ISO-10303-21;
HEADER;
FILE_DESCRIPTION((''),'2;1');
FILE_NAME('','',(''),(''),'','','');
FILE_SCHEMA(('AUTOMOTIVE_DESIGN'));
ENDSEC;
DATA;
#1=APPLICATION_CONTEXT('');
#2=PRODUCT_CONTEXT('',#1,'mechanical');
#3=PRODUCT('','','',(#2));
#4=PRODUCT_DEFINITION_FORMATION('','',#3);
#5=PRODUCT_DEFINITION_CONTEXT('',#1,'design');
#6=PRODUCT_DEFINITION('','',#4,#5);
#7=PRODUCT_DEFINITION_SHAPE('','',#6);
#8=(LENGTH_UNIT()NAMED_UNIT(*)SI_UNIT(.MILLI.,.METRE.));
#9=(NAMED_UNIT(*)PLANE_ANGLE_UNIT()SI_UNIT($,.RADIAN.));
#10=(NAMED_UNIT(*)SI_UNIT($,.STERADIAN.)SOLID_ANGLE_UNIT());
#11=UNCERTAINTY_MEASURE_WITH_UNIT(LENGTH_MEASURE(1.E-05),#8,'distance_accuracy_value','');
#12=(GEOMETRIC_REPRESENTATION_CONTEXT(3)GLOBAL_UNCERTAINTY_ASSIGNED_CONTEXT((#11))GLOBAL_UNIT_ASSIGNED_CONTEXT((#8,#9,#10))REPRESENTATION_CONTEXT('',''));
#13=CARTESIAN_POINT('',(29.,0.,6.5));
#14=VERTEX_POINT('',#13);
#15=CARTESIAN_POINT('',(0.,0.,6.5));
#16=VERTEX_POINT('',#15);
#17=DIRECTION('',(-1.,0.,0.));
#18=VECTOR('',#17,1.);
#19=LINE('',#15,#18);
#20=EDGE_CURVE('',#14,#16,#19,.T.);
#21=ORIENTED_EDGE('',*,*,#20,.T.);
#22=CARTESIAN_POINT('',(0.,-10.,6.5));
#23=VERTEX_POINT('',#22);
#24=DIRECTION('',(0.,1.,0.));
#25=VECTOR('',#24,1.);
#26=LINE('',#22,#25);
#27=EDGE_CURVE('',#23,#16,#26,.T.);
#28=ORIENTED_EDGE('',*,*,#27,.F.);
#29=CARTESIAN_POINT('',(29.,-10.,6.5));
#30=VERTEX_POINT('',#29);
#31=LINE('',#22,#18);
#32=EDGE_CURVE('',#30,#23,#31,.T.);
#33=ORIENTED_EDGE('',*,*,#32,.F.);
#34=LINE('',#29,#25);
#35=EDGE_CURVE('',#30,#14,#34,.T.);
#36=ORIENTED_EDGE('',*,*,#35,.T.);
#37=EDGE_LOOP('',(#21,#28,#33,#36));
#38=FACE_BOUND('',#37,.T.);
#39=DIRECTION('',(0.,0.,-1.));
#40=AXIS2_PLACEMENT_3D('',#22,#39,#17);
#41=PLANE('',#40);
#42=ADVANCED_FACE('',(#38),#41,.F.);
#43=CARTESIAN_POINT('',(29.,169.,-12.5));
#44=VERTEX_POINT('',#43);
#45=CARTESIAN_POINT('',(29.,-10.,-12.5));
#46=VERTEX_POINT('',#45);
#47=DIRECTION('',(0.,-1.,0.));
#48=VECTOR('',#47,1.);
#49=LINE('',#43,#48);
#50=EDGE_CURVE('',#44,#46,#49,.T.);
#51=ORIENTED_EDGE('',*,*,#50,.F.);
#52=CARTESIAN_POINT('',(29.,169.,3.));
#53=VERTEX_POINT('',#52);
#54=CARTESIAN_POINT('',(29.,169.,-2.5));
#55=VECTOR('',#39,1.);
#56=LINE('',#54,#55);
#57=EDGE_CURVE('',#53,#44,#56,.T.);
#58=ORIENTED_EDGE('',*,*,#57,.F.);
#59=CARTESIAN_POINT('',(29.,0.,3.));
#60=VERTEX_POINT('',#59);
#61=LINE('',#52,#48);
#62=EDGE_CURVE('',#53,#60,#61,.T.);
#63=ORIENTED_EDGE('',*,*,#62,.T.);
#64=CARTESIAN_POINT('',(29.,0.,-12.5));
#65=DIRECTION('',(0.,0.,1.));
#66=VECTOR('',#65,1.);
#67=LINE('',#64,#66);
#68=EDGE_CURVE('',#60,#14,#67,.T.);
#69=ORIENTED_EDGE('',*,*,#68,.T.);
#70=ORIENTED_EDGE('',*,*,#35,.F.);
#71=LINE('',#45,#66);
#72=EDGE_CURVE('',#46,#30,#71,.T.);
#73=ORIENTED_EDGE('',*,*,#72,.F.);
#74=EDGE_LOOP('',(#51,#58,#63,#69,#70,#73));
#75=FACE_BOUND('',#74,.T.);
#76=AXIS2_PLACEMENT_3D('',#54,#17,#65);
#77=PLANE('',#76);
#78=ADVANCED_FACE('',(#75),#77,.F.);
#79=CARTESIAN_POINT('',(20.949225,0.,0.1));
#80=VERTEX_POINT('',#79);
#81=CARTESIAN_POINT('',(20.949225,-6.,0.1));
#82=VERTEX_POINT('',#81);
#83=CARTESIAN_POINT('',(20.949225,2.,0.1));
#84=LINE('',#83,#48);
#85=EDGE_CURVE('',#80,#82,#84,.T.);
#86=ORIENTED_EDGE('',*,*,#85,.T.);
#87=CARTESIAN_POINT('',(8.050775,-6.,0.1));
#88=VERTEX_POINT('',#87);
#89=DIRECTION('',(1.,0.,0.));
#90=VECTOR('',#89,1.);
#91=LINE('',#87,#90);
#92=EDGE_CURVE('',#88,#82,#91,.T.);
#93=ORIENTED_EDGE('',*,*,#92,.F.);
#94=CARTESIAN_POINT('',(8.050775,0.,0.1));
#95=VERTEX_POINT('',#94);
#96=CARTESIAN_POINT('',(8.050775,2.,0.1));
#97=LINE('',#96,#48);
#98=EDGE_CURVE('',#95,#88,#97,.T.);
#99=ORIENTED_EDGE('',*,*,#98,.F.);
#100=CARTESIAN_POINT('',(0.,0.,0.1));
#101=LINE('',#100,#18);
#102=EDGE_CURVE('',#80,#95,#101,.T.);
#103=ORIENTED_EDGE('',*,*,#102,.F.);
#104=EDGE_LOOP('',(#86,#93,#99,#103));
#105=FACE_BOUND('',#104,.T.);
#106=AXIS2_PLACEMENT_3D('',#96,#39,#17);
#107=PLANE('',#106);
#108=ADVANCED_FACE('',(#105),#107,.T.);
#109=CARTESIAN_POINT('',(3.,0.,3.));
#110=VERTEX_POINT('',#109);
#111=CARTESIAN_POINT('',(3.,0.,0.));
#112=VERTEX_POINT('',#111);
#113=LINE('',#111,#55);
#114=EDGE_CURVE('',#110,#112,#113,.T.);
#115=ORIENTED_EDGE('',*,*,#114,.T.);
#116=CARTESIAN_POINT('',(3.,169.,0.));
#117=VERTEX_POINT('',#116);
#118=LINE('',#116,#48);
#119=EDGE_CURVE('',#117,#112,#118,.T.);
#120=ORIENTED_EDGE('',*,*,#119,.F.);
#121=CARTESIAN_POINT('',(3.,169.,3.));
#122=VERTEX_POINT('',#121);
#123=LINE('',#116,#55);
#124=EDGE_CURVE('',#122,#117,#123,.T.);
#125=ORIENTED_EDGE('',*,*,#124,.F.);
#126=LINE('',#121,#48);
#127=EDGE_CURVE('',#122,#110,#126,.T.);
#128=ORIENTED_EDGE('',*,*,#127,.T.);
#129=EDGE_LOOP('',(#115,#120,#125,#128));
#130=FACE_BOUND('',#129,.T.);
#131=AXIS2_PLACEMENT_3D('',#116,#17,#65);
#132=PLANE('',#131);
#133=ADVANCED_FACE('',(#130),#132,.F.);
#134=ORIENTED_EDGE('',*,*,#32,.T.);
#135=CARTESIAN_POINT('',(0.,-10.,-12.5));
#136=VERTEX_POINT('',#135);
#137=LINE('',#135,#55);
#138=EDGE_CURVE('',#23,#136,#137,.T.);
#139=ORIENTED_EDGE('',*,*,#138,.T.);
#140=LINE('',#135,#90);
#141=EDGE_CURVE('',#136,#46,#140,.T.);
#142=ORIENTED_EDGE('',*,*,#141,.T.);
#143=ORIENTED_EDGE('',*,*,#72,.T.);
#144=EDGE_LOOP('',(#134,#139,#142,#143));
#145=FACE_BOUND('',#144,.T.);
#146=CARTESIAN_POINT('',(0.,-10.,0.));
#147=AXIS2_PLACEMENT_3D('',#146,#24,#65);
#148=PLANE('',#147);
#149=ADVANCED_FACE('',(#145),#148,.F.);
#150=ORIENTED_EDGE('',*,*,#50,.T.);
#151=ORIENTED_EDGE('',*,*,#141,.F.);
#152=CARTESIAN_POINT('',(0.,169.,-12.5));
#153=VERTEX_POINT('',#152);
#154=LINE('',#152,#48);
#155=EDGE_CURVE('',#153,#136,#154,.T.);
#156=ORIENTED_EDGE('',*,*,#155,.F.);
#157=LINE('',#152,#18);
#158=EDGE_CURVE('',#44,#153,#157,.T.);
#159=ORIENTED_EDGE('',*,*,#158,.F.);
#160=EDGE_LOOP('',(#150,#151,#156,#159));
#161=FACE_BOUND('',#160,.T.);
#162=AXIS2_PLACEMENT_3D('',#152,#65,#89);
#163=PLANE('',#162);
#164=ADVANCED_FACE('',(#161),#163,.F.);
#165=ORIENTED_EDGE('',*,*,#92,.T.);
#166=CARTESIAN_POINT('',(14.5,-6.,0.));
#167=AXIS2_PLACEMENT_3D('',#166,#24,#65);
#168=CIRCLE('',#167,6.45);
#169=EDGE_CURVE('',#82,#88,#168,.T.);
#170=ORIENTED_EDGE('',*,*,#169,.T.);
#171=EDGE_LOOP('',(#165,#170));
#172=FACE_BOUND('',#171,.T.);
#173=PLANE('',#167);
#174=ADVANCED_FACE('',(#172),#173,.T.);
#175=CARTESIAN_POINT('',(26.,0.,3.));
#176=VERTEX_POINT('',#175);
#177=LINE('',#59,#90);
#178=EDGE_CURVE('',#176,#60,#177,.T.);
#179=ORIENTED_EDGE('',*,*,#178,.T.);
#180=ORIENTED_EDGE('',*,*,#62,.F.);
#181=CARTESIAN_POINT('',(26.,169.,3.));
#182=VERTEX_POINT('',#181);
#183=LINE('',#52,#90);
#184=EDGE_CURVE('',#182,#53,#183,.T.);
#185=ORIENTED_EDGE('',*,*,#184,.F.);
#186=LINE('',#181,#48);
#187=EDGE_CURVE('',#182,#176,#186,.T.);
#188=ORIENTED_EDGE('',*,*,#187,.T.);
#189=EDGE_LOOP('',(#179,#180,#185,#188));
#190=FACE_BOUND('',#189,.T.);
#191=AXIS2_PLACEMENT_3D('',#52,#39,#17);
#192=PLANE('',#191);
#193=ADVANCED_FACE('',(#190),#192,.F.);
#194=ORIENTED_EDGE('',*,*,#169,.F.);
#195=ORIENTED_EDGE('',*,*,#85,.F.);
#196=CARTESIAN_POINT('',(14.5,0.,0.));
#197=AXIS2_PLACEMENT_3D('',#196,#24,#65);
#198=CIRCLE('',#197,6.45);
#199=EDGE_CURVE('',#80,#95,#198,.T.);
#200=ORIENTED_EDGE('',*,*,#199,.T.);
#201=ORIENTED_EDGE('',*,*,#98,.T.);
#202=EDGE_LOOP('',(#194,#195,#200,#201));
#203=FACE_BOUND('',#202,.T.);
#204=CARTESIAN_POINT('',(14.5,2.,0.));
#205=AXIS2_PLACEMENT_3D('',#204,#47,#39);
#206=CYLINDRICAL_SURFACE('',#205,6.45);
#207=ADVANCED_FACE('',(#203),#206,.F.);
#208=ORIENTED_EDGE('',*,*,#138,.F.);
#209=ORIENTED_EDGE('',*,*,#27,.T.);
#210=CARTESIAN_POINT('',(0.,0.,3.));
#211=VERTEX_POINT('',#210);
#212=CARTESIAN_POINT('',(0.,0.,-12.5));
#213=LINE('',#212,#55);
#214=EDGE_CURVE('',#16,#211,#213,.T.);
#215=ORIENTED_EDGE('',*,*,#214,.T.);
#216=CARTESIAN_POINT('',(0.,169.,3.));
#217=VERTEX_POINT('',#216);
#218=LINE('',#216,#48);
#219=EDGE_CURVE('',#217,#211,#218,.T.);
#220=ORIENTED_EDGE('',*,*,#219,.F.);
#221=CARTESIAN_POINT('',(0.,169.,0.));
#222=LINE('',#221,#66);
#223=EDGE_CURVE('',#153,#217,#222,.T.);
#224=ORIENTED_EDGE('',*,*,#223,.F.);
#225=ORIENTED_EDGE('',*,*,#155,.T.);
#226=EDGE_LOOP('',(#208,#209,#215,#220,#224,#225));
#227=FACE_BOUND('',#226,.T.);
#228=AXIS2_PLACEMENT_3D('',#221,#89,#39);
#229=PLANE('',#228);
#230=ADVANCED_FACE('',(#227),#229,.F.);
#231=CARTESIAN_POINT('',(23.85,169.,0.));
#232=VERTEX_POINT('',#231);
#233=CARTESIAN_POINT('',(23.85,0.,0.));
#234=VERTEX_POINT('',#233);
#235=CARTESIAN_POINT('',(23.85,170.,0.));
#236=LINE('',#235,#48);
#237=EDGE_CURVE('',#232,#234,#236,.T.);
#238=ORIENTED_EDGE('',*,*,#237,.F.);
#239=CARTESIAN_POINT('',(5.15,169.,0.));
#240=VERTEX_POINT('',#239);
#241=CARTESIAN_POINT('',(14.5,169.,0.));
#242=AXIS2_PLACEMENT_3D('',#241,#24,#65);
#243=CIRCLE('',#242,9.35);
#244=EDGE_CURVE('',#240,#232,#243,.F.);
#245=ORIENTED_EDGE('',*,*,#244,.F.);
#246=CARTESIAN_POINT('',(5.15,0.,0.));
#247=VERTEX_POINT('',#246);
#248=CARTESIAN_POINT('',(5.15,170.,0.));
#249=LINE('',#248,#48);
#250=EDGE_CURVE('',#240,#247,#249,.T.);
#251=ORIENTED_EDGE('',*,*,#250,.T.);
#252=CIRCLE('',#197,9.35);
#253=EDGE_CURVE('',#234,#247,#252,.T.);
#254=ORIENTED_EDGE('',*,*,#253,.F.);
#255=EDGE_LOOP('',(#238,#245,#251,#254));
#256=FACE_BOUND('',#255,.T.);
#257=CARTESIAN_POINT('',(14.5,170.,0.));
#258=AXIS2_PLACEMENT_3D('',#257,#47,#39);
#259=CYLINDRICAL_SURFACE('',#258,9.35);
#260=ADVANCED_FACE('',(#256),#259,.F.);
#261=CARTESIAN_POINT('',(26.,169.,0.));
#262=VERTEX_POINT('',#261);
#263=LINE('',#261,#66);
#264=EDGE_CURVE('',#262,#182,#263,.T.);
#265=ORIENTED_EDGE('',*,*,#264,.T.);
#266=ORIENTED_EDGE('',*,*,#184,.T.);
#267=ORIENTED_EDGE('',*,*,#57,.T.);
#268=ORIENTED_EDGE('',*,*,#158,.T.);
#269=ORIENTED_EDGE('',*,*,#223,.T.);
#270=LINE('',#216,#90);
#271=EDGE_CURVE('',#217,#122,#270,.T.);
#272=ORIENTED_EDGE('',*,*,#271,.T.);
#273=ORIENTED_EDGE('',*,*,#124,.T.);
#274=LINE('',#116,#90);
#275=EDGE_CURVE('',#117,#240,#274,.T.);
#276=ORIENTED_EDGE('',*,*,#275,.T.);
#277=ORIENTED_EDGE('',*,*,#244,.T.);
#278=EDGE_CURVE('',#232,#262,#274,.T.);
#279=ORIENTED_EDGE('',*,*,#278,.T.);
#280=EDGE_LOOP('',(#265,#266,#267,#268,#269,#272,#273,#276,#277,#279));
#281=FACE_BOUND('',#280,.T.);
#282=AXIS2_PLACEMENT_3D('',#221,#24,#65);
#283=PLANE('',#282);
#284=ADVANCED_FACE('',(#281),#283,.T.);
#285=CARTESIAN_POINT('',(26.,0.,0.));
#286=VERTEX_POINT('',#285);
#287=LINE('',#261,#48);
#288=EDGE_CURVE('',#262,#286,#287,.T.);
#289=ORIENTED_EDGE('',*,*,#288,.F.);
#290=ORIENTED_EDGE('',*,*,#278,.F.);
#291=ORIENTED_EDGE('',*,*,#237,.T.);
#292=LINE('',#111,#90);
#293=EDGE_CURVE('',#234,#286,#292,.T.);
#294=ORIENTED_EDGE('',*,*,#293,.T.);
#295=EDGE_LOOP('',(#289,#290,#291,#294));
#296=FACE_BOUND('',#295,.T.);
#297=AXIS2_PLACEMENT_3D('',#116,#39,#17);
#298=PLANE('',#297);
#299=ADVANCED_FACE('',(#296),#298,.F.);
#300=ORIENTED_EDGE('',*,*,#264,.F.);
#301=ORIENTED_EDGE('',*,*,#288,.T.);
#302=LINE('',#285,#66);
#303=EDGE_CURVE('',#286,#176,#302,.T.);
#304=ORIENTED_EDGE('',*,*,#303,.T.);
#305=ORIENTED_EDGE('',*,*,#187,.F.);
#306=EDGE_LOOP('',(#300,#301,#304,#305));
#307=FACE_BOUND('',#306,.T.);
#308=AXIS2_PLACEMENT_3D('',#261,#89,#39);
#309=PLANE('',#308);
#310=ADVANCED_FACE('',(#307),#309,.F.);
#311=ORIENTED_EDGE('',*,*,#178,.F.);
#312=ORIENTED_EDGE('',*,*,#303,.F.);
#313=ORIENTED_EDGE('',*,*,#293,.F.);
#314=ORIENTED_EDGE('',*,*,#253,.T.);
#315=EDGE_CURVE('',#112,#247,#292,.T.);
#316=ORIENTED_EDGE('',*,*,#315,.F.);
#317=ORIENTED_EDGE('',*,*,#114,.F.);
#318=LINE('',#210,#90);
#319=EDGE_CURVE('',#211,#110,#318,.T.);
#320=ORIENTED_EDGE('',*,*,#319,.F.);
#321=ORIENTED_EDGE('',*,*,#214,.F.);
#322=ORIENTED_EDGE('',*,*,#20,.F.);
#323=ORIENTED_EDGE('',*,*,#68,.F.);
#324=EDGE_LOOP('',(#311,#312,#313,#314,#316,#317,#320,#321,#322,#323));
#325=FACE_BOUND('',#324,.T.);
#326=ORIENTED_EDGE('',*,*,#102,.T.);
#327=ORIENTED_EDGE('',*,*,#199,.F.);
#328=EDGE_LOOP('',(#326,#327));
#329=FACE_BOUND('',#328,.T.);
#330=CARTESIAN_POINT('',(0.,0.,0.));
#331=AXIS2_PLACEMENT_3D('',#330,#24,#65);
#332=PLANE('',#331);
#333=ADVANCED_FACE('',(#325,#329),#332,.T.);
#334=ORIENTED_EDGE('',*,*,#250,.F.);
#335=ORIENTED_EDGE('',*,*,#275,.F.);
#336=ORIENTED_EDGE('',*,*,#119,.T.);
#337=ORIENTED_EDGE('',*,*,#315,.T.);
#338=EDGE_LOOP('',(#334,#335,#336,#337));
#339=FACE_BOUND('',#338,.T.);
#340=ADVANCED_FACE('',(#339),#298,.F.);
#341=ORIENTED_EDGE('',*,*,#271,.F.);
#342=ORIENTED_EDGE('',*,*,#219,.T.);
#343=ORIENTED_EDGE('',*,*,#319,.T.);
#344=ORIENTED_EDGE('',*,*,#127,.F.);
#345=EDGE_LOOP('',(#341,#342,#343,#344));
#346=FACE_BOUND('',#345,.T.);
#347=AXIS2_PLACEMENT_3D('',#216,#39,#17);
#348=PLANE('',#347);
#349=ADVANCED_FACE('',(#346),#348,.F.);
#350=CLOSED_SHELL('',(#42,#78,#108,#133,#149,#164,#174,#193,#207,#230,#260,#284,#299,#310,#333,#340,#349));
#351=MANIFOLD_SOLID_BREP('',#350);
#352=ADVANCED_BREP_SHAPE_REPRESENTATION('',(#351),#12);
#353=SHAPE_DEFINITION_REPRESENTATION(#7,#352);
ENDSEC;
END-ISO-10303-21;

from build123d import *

# Parameters (mm, degrees)
MOLD_BLOCK_WITH_RIDGES_DEPTH  = 169
SKETCH2_W                     = 29
SKETCH2_H                     = 19
BOTTOM_LEDGE_DEPTH            = 10
ROD_ALIGNMENT_HOLE_DEPTH      = 2
ROD_ALIGNMENT_HOLE_DEPTH_BACK = 6
SUBTRACT_ACTUATOR_DEPTH       = 169


# Read off the part's stored shape, not the designer's step: subtract actuator
with BuildPart() as part:
    # Sketch1 → mold block with ridges (new body)
    with BuildSketch(Plane(origin=(0, 0, 0), x_dir=(1, 0, 0), z_dir=(0, 1, 0))):
        Polygon((3, 0), (26, 0), (26, -3), (29, -3), (29, 2.5), (29, 12.5), (0, 12.5), (0, 0), (0, -3), (3, -3), align=None)
    extrude(amount=MOLD_BLOCK_WITH_RIDGES_DEPTH)

    # Sketch2 → bottom ledge (add)
    with BuildSketch(Plane.XZ):
        with Locations((14.5, -3)):
            Rectangle(SKETCH2_W, SKETCH2_H)
    extrude(amount=BOTTOM_LEDGE_DEPTH)

    # Sketch3 → rod alignment hole (cut, two sides: drawn at the far end of the back side and taken through both)
    with BuildSketch(Plane(origin=(0, 0, 0), x_dir=(1, 0, 0), z_dir=(0, 1, 0)).offset(-ROD_ALIGNMENT_HOLE_DEPTH_BACK)):
        with BuildLine():
            Line((8.05077524, -0.1), (20.94922476, -0.1))
            ThreePointArc((20.94922476, -0.1), (14.5, 6.45), (8.05077524, -0.1))
        make_face()
    extrude(amount=ROD_ALIGNMENT_HOLE_DEPTH + ROD_ALIGNMENT_HOLE_DEPTH_BACK, mode=Mode.SUBTRACT)

    # subtract actuator outline → subtract actuator (cut)
    with BuildSketch(Plane(origin=(0, 0, 0), x_dir=(1, 0, 0), z_dir=(0, 1, 0))):
        with BuildLine():
            ThreePointArc((23.85, 0), (14.5, 9.35), (5.15, 0))
            Line((5.15, 0), (23.85, 0))
        make_face()
    extrude(amount=SUBTRACT_ACTUATOR_DEPTH, mode=Mode.SUBTRACT)


solid = part.part
